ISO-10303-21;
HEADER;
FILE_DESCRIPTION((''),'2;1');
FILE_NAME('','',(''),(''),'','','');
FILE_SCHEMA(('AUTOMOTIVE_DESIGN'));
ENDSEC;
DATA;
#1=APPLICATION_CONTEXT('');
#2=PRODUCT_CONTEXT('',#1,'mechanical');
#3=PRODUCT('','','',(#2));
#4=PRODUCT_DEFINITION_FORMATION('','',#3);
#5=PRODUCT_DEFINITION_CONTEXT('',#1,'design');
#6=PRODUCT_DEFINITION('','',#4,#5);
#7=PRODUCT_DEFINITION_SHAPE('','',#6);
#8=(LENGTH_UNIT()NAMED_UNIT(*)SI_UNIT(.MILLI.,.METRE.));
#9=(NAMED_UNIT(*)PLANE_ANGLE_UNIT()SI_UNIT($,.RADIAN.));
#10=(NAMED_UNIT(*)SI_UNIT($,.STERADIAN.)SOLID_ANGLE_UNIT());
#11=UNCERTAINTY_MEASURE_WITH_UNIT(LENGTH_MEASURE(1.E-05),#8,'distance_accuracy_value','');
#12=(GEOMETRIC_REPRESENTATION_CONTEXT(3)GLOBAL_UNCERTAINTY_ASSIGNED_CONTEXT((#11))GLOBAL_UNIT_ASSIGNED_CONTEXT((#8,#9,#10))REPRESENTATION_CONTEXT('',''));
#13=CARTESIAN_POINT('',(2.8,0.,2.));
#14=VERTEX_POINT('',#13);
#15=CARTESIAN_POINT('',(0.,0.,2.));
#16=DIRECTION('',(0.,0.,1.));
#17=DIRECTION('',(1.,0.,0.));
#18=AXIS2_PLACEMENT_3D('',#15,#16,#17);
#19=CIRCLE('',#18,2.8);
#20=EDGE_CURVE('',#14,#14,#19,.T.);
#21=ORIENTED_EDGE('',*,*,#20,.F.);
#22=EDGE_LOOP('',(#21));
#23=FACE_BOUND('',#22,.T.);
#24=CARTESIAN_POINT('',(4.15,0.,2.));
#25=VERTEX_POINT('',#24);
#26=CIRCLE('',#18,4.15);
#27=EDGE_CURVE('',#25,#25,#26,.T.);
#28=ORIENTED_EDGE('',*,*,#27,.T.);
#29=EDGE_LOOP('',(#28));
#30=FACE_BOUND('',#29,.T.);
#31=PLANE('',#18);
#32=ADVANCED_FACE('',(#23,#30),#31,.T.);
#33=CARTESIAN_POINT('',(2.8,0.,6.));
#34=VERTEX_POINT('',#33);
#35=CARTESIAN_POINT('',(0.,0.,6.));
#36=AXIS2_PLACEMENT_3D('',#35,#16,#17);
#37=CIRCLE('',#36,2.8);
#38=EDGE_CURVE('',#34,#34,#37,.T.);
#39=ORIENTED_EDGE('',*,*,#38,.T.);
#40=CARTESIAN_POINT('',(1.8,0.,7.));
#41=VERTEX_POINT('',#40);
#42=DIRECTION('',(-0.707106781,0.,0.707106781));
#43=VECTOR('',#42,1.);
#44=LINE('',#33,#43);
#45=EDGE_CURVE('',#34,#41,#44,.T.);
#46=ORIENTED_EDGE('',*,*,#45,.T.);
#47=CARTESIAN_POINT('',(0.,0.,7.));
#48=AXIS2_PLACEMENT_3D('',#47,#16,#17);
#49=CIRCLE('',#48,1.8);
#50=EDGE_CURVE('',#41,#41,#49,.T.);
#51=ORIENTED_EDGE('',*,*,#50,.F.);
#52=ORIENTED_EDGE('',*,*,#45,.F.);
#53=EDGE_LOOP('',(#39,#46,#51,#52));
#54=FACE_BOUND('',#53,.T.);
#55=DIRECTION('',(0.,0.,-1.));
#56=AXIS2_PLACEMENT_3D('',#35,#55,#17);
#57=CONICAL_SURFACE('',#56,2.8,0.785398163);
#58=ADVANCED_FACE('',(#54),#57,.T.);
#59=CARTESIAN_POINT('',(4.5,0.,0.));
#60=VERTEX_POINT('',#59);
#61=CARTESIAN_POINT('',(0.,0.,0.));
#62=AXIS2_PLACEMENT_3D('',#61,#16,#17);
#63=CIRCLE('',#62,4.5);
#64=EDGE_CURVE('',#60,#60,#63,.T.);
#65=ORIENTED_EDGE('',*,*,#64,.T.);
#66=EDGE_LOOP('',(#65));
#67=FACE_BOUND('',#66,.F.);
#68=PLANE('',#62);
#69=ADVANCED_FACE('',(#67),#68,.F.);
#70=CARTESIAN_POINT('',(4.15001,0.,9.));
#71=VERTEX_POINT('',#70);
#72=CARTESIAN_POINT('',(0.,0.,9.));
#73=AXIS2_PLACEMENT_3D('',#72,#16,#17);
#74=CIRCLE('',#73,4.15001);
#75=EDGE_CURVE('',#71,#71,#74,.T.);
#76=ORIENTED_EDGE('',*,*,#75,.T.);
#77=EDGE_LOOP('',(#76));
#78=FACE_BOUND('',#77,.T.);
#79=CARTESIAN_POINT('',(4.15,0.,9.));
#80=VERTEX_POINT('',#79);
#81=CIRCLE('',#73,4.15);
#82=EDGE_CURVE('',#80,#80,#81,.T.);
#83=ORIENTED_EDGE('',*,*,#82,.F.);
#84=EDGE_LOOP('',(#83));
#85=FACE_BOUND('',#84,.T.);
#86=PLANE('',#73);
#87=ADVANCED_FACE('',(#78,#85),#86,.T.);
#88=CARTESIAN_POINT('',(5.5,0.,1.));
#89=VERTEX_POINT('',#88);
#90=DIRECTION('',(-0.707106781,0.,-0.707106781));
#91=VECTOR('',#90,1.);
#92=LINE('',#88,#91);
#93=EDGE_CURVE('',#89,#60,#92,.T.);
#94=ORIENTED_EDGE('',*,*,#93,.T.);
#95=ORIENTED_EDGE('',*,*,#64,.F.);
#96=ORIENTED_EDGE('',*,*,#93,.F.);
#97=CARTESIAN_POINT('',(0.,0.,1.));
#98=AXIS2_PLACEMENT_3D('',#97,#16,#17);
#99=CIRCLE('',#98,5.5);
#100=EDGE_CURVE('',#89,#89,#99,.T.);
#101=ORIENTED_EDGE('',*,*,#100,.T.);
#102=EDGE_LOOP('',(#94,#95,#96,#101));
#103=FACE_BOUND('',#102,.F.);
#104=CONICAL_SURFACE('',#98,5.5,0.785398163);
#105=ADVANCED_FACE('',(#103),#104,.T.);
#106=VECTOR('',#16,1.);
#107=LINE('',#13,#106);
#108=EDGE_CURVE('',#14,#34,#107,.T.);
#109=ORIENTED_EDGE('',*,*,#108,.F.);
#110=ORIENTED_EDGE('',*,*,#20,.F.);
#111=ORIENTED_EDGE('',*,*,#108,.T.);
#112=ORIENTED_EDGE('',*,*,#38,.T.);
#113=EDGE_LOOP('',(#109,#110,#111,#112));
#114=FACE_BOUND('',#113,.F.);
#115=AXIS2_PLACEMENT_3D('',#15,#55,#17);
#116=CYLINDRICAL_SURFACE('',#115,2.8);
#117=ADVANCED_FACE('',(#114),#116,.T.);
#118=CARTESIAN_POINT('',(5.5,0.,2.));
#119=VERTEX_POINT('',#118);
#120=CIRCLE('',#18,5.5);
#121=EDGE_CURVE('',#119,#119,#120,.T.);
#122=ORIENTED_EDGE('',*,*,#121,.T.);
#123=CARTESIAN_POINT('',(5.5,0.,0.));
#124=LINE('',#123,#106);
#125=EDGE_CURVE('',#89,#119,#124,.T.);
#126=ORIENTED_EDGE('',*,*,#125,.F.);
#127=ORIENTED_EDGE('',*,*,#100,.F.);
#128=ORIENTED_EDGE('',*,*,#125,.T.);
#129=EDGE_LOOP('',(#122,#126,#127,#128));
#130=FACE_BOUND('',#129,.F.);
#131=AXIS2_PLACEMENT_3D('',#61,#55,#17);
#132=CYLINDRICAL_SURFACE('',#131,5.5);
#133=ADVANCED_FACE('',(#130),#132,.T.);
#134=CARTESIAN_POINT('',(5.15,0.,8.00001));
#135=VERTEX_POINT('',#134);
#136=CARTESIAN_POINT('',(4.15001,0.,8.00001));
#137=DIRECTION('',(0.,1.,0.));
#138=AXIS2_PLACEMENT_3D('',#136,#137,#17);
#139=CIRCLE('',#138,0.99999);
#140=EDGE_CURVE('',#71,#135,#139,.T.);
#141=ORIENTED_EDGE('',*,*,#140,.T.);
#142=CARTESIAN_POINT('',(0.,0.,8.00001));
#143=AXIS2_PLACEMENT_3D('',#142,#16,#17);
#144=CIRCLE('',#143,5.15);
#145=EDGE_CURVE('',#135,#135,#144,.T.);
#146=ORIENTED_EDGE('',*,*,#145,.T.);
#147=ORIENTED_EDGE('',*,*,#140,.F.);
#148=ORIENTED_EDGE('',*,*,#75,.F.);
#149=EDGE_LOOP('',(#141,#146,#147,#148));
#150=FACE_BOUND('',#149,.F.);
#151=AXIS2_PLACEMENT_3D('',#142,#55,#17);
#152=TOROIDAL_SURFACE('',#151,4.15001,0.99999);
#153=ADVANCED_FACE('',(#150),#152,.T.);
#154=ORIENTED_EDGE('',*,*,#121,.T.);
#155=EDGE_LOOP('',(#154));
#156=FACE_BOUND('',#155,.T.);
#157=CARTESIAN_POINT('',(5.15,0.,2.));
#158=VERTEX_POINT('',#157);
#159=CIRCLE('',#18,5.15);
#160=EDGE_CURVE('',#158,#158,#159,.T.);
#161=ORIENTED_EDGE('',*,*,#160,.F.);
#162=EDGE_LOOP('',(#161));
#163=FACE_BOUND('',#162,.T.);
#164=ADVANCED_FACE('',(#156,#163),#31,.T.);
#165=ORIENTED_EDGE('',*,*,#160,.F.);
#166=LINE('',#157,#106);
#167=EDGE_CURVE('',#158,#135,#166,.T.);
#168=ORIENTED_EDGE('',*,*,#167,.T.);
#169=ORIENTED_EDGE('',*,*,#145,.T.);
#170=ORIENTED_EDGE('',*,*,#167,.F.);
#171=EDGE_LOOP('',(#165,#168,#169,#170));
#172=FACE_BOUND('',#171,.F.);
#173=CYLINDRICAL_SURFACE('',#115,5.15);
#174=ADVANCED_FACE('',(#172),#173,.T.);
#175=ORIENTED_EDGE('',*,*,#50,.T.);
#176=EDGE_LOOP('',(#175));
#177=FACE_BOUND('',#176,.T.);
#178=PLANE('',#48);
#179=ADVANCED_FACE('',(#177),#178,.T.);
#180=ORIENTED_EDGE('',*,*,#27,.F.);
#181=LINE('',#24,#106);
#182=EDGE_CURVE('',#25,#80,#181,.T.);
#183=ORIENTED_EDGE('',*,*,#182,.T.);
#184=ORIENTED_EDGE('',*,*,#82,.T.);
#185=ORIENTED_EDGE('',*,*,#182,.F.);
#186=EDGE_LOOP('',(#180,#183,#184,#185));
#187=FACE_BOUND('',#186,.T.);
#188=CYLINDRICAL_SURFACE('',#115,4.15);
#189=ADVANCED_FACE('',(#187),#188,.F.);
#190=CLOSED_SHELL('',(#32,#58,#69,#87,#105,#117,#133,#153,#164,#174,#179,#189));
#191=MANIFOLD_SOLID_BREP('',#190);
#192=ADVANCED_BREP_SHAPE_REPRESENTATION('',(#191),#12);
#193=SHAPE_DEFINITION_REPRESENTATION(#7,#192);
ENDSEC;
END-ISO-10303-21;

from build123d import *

# Parameters (mm, degrees)
F0_R     = 5.5
F1_DEPTH = 2
F2_R     = 2.8
F3_DEPTH = 5
F2_R_2   = 5.15
F2_R_3   = 4.15
F4_DEPTH = 7
F5_SIZE2 = 1
F5_SIZE  = 1
F6_R     = 0.99999
F7_SIZE  = 1


# Not quite as in the source:
# - a fillet or chamfer is up to 0.001 mm smaller than in the source, because OpenCascade refuses the exact size


with BuildPart() as f1:
    # F0 (on Top) → F1 (new body)
    with BuildSketch(Plane.XY):
        Circle(F0_R)
    extrude(amount=F1_DEPTH)

    # F2 (on face) → F3 (join)
    with BuildSketch(Plane.XY.offset(2)):
        Circle(F2_R)
    extrude(amount=F3_DEPTH)

    # F2 (on face) → F4 (join)
    with BuildSketch(Plane.XY.offset(2)):
        Circle(F2_R_2)
        Circle(F2_R_3, mode=Mode.SUBTRACT)
    extrude(amount=F4_DEPTH)

    # F5
    f5_edges = [f1.edges().sort_by_distance(p)[0] for p in [
        (-2.8, 0, 7),
    ]]
    chamfer(f5_edges, length=F5_SIZE, length2=F5_SIZE2)

    # F6 (radius 1 in the source; OpenCascade refuses exactly that, so slightly less here)
    f6_edges = [f1.edges().sort_by_distance(p)[0] for p in [
        (-5.15, 0, 9),
    ]]
    fillet(f6_edges, radius=F6_R)

    # F7
    f7_edges = [f1.edges().sort_by_distance(p)[0] for p in [
        (-5.5, 0, 0),
    ]]
    chamfer(f7_edges, length=F7_SIZE)


solid = f1.part
